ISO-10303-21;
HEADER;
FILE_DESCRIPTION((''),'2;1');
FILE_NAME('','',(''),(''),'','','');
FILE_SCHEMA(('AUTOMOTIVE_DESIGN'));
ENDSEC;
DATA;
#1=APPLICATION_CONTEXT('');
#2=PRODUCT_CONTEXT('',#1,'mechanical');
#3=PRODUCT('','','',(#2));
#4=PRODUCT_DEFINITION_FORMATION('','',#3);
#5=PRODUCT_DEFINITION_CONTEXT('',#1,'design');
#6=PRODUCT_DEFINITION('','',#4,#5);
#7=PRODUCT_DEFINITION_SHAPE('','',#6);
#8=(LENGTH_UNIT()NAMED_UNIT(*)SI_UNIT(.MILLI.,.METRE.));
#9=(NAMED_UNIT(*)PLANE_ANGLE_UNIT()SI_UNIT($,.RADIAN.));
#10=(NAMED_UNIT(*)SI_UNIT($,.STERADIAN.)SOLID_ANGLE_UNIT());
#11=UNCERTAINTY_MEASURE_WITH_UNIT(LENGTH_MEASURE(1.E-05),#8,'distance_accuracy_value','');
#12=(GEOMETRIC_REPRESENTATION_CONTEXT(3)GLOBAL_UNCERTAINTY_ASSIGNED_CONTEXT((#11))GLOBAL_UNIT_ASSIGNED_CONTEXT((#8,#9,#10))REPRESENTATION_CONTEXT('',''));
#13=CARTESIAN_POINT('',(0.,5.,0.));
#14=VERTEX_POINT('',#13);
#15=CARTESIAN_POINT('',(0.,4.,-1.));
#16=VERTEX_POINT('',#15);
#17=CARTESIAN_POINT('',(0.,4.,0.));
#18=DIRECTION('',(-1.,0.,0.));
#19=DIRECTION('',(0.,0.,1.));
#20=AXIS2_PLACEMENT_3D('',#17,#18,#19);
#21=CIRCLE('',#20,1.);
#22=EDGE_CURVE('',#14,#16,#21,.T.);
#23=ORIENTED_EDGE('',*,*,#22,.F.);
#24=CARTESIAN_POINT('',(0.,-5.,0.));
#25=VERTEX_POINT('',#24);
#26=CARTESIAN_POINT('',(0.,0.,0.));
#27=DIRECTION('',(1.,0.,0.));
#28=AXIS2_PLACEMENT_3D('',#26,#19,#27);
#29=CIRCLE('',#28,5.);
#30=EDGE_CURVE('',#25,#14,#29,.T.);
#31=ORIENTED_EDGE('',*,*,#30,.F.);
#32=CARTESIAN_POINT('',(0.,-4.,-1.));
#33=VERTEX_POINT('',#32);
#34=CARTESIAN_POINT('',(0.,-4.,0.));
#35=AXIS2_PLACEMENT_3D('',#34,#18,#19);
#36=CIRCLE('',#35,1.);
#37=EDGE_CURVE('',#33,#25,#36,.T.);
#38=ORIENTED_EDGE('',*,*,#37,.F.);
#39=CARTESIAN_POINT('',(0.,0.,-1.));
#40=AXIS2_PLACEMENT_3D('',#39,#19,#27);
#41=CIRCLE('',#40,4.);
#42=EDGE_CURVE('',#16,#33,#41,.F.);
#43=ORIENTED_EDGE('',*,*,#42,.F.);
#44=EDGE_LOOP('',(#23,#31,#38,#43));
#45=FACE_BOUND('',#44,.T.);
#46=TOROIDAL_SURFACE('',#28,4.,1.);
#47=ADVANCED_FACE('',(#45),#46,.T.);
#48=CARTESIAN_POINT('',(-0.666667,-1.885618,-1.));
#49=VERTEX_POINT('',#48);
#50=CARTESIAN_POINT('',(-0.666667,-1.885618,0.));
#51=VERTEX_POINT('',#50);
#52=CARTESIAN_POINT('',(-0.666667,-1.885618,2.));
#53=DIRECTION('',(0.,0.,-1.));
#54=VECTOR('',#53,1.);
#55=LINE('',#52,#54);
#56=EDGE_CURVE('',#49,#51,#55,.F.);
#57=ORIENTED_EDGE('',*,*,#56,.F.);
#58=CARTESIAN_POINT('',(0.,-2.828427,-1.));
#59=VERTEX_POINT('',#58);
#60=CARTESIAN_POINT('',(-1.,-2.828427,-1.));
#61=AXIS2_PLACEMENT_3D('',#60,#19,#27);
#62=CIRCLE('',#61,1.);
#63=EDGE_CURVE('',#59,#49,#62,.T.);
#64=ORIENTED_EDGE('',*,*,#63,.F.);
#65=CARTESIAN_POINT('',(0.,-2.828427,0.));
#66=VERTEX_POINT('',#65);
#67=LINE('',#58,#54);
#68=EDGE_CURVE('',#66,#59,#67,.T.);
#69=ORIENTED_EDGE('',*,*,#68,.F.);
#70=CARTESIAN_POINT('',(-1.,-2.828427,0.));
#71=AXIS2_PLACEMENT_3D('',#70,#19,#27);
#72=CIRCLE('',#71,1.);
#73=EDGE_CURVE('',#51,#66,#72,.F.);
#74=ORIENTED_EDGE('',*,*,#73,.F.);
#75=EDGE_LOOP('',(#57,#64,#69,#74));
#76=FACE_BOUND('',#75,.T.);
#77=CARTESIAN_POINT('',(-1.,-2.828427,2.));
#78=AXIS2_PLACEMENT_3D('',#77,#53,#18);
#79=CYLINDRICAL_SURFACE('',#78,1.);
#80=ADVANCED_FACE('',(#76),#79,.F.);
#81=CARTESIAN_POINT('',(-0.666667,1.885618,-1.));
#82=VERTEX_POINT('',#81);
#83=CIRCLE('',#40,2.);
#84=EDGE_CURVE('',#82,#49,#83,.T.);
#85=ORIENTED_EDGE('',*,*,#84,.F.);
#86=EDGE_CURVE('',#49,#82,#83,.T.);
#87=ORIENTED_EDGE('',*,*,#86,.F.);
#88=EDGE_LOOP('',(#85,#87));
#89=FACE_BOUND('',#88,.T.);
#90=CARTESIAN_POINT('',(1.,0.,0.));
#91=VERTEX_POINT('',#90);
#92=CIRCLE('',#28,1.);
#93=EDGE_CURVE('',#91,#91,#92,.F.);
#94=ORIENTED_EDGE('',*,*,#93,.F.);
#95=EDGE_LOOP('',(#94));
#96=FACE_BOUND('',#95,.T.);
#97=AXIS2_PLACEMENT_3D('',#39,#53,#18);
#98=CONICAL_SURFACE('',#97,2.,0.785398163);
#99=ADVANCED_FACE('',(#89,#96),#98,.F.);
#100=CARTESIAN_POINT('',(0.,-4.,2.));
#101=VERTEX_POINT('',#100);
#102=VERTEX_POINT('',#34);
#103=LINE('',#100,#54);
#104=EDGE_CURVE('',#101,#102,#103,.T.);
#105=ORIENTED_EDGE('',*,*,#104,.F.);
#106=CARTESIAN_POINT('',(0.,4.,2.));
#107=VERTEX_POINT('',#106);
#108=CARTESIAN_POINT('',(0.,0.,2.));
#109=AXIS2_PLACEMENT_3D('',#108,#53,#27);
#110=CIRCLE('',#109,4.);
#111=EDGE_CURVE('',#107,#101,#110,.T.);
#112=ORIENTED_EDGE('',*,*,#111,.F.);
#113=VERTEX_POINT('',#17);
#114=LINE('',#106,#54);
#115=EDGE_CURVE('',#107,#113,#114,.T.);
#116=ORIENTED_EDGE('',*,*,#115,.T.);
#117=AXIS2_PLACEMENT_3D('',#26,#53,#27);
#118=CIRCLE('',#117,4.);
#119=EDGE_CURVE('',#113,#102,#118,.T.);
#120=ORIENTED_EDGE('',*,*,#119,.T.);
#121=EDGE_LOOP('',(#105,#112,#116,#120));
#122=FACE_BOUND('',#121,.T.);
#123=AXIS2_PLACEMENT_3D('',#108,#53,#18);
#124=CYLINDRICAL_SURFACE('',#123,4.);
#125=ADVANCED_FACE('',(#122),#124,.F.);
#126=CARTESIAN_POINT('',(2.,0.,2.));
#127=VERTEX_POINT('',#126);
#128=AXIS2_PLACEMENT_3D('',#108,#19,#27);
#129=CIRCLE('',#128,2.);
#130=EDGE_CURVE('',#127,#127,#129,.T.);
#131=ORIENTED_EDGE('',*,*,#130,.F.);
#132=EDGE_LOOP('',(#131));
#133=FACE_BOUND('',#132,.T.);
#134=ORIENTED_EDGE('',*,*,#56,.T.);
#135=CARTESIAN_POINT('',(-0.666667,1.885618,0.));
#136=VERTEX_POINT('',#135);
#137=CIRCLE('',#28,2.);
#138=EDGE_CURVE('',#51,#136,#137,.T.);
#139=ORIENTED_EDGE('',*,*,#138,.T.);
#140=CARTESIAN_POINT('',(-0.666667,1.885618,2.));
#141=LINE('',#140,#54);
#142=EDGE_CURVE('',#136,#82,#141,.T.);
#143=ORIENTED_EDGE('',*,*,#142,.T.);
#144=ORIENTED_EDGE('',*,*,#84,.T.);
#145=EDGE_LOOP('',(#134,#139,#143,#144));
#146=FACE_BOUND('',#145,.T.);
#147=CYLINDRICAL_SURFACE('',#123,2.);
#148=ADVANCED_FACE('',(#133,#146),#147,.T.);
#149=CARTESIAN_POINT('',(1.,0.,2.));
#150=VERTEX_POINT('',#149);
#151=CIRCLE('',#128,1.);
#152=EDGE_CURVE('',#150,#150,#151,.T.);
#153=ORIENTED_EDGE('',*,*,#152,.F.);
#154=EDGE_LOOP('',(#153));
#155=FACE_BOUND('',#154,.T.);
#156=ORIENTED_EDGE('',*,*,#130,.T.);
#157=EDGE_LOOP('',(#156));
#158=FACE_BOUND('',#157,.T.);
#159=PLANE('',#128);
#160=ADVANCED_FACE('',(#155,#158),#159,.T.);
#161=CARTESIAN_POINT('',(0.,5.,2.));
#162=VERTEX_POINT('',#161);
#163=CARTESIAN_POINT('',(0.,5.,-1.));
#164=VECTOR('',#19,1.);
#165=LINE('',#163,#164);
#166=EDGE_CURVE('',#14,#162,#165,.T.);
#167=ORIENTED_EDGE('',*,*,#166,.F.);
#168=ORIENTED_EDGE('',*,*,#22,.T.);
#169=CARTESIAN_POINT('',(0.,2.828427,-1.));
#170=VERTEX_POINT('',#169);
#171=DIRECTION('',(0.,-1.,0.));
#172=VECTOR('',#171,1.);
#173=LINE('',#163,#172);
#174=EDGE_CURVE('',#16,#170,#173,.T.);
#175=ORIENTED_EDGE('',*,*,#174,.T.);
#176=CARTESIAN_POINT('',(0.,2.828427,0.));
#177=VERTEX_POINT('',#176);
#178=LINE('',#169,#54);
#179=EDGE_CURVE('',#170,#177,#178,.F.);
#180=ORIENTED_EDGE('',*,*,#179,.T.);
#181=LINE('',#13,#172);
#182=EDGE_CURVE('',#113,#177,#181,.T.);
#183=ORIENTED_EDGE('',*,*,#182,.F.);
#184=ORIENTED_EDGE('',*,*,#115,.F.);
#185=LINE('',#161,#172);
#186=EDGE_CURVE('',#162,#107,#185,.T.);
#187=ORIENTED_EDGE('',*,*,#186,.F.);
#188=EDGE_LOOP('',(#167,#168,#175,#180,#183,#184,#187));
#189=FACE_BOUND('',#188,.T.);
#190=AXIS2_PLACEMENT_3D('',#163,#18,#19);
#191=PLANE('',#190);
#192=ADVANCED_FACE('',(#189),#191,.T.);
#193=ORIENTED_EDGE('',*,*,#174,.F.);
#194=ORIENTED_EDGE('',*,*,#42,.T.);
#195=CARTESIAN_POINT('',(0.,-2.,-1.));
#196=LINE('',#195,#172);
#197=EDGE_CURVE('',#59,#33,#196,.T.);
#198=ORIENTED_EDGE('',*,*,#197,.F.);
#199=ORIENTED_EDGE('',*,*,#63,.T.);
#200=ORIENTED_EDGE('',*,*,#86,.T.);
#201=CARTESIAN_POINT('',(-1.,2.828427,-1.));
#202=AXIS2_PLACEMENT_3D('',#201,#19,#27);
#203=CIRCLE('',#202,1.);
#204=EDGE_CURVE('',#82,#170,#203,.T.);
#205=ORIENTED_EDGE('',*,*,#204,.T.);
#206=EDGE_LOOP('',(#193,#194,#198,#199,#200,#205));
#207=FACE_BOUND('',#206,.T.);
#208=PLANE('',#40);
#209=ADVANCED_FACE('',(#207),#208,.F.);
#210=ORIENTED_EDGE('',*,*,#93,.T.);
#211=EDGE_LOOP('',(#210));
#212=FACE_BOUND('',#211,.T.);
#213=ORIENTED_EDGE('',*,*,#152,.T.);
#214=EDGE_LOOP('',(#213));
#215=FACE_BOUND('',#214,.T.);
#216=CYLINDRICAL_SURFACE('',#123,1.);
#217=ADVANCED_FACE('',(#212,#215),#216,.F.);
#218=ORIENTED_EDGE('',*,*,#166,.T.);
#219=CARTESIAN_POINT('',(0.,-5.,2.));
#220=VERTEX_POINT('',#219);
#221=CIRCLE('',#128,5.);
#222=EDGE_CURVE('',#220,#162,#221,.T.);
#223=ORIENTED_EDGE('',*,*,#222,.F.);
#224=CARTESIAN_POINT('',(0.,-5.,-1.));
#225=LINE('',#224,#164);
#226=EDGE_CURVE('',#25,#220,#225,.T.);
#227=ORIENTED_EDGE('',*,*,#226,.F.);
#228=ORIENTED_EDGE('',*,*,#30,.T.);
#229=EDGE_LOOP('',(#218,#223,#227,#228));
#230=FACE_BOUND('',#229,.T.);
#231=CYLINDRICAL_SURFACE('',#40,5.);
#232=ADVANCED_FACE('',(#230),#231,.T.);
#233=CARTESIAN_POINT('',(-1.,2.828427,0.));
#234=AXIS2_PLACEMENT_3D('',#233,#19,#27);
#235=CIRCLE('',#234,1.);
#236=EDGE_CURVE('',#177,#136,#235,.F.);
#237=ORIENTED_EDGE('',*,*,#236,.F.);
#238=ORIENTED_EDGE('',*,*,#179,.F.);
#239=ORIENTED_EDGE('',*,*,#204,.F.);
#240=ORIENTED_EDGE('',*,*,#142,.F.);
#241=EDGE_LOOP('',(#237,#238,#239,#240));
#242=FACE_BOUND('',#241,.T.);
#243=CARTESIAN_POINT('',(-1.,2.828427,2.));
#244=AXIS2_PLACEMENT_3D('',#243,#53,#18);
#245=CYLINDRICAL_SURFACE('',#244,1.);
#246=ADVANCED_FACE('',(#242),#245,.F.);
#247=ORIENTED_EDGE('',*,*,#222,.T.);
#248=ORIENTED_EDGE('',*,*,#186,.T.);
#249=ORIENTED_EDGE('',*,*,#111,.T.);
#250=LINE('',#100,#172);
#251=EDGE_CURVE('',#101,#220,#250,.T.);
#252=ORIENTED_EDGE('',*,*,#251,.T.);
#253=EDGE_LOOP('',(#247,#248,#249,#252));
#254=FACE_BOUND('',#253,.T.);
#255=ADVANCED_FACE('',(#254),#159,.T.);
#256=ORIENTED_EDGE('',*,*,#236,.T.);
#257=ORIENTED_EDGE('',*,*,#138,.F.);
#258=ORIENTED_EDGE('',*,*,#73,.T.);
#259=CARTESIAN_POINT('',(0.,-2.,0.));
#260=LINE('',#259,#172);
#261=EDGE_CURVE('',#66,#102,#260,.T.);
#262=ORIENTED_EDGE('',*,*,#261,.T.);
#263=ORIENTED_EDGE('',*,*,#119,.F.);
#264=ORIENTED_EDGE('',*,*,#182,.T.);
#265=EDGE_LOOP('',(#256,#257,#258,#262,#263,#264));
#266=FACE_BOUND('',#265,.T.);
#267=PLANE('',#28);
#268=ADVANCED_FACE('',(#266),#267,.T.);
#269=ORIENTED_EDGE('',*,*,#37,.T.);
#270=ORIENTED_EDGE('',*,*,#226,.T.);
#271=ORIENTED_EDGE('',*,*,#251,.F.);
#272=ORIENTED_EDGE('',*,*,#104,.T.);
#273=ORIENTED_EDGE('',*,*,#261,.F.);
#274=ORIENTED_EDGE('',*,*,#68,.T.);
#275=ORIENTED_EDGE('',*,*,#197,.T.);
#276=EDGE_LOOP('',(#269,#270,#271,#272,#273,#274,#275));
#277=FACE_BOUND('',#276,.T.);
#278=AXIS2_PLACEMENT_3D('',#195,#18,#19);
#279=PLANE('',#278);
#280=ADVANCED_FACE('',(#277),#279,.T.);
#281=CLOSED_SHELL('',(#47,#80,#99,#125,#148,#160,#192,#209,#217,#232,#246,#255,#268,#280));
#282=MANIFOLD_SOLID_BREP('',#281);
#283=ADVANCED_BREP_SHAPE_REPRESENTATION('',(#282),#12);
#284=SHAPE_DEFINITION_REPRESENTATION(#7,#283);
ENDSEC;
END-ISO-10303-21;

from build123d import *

# Parameters (mm, degrees)
SKETCH1_R           = 2
SKETCH1_R_2         = 1
BOSS_EXTRUDE1_DEPTH = 2
BOSS_EXTRUDE2_DEPTH = 2
BOSS_EXTRUDE3_START = -1
SKETCH5_R           = 1
BOSS_EXTRUDE3_DEPTH = 1
CHAMFER1_SIZE       = 1
FILLET1_R           = 1


with BuildPart() as part:
    # Sketch1 → Boss-Extrude1 (new body)
    with BuildSketch(Plane.XY):
        Circle(SKETCH1_R)
        Circle(SKETCH1_R_2, mode=Mode.SUBTRACT)
    extrude(amount=BOSS_EXTRUDE1_DEPTH)



with BuildPart() as body_2:
    # Sketch2 → Boss-Extrude2 (new body)
    with BuildSketch(Plane.XY):
        with BuildLine():
            Line((0, 5), (0, 4))
            ThreePointArc((0, 4), (4, 0), (0, -4))
            Line((0, -4), (0, -5))
            ThreePointArc((0, -5), (5, 0), (0, 5))
        make_face()
    extrude(amount=BOSS_EXTRUDE2_DEPTH)


with BuildPart() as part_1:
    add(part.part)

    add(body_2.part)  # Boss-Extrude3 merges body 2
    # Sketch5 → Boss-Extrude3 (add)
    with BuildSketch(Plane.XY.offset(BOSS_EXTRUDE3_START)):
        with BuildLine():
            Line((0, 5), (0, 2))
            ThreePointArc((0, 2), (-2, 0), (0, -2))
            Line((0, -2), (0, -5))
            ThreePointArc((0, -5), (5, 0), (0, 5))
        make_face()
        Circle(SKETCH5_R, mode=Mode.SUBTRACT)
    extrude(amount=BOSS_EXTRUDE3_DEPTH)

    # Chamfer1
    chamfer1_edges = [part_1.edges().sort_by_distance(p)[0] for p in [
        (-1, 0, -1),
    ]]
    chamfer(chamfer1_edges, length=CHAMFER1_SIZE - 0.0001)  # a hair under: the kernel refuses the full size

    # Fillet1
    fillet1_edges = [part_1.edges().sort_by_distance(p)[0] for p in [
        (0, -2, -0.5),
        (0, 2, -0.5),
        (5, 0, -1),
    ]]
    fillet(fillet1_edges, radius=FILLET1_R)


solid = part_1.part
